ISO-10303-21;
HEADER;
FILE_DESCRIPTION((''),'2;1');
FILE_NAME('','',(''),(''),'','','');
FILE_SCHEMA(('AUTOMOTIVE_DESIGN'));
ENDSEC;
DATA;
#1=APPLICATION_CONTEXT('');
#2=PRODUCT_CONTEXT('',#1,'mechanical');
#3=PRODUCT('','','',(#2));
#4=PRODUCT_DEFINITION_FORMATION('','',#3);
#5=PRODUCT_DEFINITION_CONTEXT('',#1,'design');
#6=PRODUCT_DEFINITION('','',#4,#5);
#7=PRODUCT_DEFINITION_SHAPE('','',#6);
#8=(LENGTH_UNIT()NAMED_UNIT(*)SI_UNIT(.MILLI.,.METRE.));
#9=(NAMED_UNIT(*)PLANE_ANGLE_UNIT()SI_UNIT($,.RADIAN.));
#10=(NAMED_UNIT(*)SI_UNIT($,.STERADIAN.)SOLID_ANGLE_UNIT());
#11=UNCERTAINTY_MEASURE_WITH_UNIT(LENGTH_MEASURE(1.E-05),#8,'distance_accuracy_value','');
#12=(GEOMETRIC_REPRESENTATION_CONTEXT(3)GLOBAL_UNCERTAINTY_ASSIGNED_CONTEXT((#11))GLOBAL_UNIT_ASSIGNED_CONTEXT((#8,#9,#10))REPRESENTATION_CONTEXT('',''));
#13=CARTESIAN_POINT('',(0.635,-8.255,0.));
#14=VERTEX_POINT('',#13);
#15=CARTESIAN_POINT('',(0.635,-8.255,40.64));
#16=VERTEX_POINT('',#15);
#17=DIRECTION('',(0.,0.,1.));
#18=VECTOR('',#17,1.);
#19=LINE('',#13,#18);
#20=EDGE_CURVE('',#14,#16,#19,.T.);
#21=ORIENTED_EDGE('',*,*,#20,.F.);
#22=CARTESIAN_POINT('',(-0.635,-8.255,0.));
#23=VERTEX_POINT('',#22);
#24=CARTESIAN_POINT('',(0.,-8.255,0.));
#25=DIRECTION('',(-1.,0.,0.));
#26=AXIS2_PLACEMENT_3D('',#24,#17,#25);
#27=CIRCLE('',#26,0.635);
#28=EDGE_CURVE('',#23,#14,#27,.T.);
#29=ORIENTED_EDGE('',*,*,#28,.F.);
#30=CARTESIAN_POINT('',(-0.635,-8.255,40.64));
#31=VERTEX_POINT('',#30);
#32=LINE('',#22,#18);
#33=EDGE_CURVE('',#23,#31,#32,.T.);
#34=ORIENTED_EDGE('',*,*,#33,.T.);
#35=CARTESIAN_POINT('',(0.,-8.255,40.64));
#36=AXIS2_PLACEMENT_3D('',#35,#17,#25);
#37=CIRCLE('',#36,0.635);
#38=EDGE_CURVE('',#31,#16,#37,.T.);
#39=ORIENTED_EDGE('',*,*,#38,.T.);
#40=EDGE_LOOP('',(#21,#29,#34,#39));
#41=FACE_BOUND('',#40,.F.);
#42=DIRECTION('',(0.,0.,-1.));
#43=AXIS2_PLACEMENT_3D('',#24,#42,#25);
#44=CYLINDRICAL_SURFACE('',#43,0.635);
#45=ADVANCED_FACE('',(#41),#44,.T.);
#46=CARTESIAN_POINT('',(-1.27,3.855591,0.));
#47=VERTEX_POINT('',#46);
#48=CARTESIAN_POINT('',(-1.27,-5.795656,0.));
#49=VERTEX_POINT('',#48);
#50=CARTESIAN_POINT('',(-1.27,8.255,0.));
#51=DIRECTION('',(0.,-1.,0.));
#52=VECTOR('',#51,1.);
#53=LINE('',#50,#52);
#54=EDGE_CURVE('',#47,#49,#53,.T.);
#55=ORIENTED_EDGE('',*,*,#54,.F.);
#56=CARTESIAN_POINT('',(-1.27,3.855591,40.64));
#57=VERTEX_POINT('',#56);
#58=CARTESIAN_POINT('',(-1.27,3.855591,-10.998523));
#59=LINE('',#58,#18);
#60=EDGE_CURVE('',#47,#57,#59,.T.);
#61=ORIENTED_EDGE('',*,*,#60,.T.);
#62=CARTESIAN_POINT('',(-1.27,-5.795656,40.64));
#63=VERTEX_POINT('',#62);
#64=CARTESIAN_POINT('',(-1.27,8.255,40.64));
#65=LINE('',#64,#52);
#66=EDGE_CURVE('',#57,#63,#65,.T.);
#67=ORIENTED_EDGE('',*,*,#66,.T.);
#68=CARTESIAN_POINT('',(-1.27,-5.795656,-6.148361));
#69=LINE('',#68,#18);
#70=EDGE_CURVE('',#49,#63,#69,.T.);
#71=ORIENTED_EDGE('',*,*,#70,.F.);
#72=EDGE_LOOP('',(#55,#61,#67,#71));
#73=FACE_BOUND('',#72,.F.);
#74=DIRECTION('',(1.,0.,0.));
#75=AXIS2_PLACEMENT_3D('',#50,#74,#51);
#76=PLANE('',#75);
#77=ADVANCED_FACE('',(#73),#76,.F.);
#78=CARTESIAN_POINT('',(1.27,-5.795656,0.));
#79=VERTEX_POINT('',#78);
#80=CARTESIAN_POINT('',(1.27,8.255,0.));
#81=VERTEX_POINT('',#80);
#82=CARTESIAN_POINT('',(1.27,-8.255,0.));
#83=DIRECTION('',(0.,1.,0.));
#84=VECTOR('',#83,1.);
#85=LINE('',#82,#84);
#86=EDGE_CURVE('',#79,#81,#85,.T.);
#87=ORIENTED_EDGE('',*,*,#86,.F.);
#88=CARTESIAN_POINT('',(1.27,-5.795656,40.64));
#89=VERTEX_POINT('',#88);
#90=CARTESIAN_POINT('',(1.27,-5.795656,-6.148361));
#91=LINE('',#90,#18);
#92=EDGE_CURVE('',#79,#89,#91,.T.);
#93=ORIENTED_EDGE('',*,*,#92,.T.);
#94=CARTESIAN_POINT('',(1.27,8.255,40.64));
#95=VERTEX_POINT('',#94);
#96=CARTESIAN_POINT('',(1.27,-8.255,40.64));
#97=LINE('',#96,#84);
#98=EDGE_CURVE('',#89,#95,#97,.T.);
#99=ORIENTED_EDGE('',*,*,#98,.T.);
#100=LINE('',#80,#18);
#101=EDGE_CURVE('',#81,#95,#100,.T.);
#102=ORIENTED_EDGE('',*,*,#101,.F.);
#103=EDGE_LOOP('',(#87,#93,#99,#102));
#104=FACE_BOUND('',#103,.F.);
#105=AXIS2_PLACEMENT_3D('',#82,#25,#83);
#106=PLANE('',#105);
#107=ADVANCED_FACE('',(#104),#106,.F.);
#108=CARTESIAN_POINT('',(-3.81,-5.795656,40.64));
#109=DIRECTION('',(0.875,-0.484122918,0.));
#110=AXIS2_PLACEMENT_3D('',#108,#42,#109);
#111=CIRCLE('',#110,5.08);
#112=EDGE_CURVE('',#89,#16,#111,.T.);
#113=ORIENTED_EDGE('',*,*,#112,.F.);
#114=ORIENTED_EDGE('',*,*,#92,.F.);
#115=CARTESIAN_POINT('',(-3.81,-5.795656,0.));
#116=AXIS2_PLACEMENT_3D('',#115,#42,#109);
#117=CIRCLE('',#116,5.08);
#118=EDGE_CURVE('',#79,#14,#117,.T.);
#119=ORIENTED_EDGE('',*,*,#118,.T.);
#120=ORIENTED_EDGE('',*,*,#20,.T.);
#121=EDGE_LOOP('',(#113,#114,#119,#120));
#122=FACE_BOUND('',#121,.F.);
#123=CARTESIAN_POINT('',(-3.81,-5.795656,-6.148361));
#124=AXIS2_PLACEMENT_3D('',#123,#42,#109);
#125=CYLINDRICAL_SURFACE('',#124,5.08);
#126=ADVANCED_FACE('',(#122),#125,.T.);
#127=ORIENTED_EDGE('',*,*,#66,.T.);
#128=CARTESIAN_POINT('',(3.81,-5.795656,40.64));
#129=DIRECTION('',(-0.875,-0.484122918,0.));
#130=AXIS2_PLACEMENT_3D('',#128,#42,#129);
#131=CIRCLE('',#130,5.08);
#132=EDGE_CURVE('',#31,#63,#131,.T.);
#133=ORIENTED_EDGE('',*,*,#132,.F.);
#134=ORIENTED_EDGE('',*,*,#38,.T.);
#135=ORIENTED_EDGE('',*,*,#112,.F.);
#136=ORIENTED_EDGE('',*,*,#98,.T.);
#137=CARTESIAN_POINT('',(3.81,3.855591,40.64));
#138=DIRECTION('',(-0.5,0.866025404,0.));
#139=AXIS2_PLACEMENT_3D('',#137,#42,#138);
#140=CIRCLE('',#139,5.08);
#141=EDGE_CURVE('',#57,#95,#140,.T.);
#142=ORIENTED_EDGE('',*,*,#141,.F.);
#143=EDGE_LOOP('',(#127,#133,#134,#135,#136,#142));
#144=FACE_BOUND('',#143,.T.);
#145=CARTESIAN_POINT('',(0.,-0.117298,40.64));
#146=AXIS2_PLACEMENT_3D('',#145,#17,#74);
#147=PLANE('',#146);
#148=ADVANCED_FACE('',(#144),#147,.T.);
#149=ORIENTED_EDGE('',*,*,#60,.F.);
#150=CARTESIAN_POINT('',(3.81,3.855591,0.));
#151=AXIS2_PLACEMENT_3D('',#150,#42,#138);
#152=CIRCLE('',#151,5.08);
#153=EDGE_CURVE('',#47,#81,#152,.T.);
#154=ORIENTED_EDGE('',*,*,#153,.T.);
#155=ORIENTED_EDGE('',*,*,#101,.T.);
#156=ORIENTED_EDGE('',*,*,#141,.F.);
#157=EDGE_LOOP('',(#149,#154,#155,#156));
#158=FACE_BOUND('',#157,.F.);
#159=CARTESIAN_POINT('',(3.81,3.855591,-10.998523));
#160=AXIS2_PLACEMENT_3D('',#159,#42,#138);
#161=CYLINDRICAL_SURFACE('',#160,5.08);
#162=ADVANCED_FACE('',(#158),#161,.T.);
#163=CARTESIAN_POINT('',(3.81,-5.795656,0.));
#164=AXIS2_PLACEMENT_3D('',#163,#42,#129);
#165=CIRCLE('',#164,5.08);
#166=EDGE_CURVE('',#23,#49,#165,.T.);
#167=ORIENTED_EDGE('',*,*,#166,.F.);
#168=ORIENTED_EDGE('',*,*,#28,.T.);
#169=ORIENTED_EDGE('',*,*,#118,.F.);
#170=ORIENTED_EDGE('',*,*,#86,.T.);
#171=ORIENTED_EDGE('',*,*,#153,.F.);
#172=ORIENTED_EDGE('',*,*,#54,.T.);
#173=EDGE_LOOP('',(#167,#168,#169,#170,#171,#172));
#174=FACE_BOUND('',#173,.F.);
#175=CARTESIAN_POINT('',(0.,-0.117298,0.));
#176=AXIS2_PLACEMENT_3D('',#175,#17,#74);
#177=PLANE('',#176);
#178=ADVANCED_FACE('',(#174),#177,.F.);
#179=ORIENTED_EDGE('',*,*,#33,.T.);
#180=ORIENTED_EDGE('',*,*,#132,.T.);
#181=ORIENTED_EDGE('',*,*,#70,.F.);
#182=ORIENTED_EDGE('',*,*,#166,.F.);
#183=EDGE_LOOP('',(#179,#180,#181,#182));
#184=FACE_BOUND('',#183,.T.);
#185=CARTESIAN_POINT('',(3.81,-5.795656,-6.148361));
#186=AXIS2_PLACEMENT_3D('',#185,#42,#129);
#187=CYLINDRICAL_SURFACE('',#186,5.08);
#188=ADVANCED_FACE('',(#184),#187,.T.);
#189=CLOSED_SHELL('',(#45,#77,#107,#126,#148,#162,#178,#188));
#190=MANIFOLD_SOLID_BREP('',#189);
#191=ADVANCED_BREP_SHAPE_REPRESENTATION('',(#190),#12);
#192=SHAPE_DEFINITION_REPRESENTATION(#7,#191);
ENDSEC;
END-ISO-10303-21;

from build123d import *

# Parameters (mm, degrees)
F1_DEPTH    = 40.64
F2_T1_DEPTH = 62.6370452561
F3_T1_DEPTH = 52.9367221242


# Not quite as in the source:
# - a fillet or chamfer that OpenCascade refuses, or shapes differently, is made with other operations: its cross-section is extruded or revolved along the edge and cut away or added


with BuildPart() as f1:
    # F0 (on Top) → F1 (new body)
    with BuildSketch(Plane.XY):
        with BuildLine():
            Line((0.635, -8.255), (1.27, -8.255))
            Line((1.27, -8.255), (1.27, 8.255))
            Line((1.27, 8.255), (-1.27, 8.255))
            Line((-1.27, 8.255), (-1.27, -8.255))
            Line((-1.27, -8.255), (-0.635, -8.255))
            ThreePointArc((-0.635, -8.255), (0, -7.62), (0.635, -8.255))
        make_face()
        with BuildLine():
            ThreePointArc((-0.635, -8.255), (0, -8.89), (0.635, -8.255))
            Line((0.635, -8.255), (-0.635, -8.255))
        make_face()
        with BuildLine():
            Line((-0.635, -8.255), (0.635, -8.255))
            ThreePointArc((0.635, -8.255), (0, -7.62), (-0.635, -8.255))
        make_face()
    extrude(amount=F1_DEPTH)

    # F2: fillet of radius 5.08 on 1 edges, made by hand

    # F2_s2 → F2_t1 (cut)
    with BuildSketch(Plane.XY.offset(-10.9985226281)):
        with BuildLine():
            ThreePointArc((1.27, 8.255), (-0.5894090512, 6.3955909488), (-1.27, 3.8555909488))
            Line((-1.27, 3.8555909488), (-1.27, 8.255))
            Line((-1.27, 8.255), (1.27, 8.255))
        make_face()
    extrude(amount=F2_T1_DEPTH, mode=Mode.SUBTRACT)

    # F3: fillet of radius 5.08 on 2 edges, made by hand

    # F3_s2 → F3_t1 (cut)
    with BuildSketch(Plane.XY.offset(-6.1483610621)):
        with BuildLine():
            ThreePointArc((-0.635, -8.255), (-1.1086888497, -7.0656555752), (-1.27, -5.7956555752))
            Line((-1.27, -5.7956555752), (-1.27, -8.255))
            Line((-1.27, -8.255), (-0.635, -8.255))
        make_face()
        with BuildLine():
            ThreePointArc((0.635, -8.255), (1.1086888497, -7.0656555752), (1.27, -5.7956555752))
            Line((1.27, -5.7956555752), (1.27, -8.255))
            Line((1.27, -8.255), (0.635, -8.255))
        make_face()
    extrude(amount=F3_T1_DEPTH, mode=Mode.SUBTRACT)


solid = f1.part
